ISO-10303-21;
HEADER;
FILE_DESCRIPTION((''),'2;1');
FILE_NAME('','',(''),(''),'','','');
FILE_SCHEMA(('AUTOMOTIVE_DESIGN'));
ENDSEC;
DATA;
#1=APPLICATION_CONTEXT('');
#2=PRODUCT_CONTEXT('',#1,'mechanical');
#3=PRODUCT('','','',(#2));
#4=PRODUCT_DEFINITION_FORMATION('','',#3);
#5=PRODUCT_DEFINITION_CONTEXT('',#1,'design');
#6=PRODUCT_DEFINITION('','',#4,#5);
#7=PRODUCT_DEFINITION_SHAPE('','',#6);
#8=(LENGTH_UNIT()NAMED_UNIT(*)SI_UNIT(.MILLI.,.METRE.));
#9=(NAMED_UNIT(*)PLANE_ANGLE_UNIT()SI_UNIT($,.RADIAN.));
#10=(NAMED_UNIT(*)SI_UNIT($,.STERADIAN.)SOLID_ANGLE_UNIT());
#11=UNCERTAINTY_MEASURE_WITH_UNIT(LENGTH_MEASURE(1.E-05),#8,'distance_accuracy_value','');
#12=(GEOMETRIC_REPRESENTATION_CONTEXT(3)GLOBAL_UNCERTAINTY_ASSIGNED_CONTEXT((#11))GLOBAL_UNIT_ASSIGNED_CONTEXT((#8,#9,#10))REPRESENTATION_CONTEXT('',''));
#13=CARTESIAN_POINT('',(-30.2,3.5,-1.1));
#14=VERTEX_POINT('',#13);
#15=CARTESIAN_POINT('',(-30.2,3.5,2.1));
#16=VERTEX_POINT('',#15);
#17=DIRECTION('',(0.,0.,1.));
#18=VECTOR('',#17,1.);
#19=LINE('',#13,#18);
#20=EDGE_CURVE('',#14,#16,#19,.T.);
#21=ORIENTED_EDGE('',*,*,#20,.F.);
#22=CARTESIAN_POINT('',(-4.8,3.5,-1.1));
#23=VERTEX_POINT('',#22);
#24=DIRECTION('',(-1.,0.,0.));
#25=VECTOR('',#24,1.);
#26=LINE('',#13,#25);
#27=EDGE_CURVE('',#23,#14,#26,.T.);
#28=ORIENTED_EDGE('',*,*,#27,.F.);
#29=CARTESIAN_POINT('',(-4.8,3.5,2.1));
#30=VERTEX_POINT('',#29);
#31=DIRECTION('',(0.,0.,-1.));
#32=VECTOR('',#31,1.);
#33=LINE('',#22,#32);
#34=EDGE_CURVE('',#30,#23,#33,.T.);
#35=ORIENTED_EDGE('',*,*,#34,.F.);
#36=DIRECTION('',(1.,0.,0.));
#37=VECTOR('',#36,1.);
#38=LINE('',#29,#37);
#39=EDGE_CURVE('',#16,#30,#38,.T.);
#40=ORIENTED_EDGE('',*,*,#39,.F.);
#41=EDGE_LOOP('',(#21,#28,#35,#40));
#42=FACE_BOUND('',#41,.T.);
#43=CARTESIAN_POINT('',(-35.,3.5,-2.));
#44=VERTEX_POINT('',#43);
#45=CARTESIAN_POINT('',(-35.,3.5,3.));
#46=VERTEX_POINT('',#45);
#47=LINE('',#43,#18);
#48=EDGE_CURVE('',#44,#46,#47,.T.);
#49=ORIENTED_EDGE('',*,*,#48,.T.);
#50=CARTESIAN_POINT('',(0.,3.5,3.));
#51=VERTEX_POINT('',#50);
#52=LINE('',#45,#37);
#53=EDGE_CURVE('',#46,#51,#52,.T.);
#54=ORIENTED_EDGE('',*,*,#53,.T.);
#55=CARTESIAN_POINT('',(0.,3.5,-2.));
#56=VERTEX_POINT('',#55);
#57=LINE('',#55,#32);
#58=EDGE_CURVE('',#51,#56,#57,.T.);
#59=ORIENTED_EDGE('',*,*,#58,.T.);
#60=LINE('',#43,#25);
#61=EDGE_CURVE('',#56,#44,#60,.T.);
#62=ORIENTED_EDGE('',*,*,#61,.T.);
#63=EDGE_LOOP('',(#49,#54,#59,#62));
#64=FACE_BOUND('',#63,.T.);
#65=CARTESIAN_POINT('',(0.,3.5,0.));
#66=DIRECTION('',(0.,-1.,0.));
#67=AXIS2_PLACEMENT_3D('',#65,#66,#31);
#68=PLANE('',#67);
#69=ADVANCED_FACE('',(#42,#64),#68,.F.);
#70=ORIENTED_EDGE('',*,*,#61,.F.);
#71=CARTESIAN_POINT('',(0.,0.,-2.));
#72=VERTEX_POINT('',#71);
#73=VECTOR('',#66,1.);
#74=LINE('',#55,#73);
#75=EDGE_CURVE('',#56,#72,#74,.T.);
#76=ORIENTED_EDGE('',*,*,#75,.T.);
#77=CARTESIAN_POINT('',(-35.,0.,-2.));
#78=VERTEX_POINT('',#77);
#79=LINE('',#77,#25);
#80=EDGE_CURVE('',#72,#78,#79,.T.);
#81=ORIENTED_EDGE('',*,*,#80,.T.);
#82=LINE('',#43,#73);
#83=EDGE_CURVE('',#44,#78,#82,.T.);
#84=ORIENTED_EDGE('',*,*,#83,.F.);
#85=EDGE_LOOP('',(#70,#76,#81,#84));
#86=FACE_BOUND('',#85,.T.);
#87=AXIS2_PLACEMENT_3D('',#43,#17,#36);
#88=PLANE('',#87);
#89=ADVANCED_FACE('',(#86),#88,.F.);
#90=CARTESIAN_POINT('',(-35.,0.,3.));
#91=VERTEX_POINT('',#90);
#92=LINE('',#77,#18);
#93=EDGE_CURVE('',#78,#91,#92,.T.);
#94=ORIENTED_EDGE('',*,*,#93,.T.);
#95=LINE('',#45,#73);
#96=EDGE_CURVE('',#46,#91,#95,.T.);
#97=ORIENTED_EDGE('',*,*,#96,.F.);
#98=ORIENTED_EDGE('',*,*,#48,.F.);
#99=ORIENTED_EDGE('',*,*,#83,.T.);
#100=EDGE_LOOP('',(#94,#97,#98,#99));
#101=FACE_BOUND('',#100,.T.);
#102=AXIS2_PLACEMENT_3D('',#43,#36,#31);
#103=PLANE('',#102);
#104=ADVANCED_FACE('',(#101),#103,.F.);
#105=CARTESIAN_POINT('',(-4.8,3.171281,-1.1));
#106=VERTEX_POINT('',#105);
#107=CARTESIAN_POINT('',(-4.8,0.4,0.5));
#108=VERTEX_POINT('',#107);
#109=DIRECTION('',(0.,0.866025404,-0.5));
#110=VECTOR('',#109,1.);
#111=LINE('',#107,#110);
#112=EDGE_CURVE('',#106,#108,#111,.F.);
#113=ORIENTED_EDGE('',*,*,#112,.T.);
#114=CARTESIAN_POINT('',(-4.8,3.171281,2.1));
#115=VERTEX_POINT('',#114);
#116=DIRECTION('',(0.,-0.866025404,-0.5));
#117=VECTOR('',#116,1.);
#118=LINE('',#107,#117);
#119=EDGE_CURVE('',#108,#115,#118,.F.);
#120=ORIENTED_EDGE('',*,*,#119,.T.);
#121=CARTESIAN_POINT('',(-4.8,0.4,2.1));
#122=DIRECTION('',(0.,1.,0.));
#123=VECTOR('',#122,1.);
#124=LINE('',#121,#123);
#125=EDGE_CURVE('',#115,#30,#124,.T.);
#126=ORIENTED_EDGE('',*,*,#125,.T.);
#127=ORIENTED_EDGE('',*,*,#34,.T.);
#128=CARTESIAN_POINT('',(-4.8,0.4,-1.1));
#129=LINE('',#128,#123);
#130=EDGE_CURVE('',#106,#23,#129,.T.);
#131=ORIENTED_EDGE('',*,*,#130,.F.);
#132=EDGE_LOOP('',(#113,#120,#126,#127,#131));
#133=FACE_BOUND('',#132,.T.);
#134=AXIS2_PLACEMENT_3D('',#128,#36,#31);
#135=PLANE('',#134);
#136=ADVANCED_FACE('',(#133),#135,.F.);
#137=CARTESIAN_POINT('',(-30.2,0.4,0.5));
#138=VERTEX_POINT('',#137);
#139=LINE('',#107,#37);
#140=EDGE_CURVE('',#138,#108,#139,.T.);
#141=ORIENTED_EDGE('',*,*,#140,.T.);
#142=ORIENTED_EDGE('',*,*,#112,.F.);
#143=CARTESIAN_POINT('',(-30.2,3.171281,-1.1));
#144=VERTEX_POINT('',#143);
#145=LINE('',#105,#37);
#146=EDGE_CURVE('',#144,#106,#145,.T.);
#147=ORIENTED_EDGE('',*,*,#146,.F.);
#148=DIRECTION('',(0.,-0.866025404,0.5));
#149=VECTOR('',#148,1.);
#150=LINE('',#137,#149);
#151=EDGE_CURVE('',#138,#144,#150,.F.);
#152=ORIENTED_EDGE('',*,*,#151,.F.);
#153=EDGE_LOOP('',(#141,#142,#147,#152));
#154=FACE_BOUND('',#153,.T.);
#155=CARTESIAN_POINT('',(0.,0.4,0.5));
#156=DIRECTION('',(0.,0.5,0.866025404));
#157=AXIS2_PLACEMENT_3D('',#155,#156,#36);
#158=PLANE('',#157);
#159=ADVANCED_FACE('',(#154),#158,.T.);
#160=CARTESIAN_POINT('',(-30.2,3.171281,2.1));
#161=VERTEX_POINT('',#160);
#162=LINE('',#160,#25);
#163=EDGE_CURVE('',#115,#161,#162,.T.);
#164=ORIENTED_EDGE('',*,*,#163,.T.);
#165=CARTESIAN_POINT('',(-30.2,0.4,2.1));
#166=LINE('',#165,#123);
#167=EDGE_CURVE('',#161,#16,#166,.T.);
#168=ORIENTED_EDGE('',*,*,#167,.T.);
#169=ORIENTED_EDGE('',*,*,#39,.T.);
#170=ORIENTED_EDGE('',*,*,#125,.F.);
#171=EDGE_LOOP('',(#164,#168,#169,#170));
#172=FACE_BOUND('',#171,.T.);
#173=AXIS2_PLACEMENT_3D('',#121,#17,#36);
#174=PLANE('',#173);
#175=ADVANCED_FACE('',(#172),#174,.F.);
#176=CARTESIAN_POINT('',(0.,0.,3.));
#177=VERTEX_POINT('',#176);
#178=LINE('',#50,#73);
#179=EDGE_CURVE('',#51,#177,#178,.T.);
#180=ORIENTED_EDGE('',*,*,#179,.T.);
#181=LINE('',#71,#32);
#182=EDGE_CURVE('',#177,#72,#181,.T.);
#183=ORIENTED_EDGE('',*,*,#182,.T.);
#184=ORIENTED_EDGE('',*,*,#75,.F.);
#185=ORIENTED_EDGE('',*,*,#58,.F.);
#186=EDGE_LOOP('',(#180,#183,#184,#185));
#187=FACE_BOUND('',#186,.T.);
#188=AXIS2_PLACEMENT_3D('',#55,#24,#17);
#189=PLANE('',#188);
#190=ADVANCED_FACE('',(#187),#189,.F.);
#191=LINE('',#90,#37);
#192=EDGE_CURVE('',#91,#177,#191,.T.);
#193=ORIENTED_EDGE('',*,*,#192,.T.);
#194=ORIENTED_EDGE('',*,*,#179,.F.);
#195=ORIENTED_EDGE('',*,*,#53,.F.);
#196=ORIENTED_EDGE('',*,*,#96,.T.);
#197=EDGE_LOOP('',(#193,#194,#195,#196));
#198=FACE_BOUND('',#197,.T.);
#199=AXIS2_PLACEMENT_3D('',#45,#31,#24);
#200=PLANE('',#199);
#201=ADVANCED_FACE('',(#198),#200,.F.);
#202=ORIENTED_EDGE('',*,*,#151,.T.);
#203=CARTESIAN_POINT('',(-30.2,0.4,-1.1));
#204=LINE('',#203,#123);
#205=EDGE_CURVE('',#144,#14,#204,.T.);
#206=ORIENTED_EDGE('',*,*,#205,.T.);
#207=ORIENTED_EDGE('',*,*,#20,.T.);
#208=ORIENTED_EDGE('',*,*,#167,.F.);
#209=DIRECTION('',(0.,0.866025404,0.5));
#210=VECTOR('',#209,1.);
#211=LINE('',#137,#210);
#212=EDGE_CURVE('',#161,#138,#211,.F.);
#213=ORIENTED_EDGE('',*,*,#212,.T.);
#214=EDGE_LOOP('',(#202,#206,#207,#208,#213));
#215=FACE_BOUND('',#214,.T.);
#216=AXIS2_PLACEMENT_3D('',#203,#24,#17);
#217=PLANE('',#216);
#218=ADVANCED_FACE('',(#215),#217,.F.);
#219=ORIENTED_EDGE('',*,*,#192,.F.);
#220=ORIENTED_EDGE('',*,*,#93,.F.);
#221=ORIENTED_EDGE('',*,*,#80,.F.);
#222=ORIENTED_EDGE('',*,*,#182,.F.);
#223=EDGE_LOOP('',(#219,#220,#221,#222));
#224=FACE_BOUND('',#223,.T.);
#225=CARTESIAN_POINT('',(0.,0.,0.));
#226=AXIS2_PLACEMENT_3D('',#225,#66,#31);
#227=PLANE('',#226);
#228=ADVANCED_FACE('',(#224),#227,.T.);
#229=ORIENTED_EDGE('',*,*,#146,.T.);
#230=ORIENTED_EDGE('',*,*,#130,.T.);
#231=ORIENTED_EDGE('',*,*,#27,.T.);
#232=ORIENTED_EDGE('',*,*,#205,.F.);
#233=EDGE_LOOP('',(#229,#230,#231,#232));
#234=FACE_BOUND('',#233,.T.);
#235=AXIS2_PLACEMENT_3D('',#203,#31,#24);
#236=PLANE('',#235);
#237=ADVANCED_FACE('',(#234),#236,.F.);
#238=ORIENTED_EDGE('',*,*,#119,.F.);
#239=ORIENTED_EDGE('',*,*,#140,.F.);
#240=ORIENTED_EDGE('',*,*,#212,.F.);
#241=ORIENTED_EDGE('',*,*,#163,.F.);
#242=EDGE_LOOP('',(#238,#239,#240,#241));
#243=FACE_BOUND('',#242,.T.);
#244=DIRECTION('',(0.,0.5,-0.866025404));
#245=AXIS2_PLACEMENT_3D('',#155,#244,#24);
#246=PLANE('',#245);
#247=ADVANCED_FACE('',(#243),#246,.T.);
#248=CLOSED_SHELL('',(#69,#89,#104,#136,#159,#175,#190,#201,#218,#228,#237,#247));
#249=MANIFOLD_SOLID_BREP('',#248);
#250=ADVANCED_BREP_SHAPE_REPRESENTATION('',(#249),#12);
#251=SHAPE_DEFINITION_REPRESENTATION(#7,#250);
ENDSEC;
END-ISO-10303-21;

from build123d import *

# Parameters (mm, degrees)
TOP_SKETCH_W                 = 35
TOP_SKETCH_H                 = 5
THICKNESS_EXTRUDE_DEPTH      = 3.5
HANDLE_SKETCH_W              = 25.4
HANDLE_SKETCH_H              = 3.2
HANDLE_SLOT_CUT_DEPTH        = 3.1
HANDLE_SLOT_CHAMFER_1_SIZE   = 1.6
HANDLE_SLOT_CHAMFER_1_SIZE2  = 2.771281292
HANDLE_SLOT_CHAMFER_2_SIZE   = 1.6
HANDLE_SLOT_CHAMFER_2_SIZE_2 = 2.771281292


with BuildPart() as part:
    # Top Sketch → Thickness Extrude (new body)
    with BuildSketch(Plane(origin=(0, 0, 0), x_dir=(1, 0, 0), z_dir=(0, 1, 0))):
        with Locations((-17.5, -0.5)):
            Rectangle(TOP_SKETCH_W, TOP_SKETCH_H)
    extrude(amount=THICKNESS_EXTRUDE_DEPTH)

    # Handle Sketch → Handle Slot Cut (cut)
    with BuildSketch(Plane(origin=(0, 3.5, 0), x_dir=(1, 0, 0), z_dir=(0, 1, 0))):
        with Locations((-17.5, -0.5)):
            Rectangle(HANDLE_SKETCH_W, HANDLE_SKETCH_H)
    extrude(amount=-HANDLE_SLOT_CUT_DEPTH, mode=Mode.SUBTRACT)

    # Handle Slot Chamfer 1
    handle_slot_chamfer_1_edges = [part.edges().sort_by_distance(p)[0] for p in [
        (-17.5, 0.4, 2.1),
    ]]
    handle_slot_chamfer_1_side = [part.faces().sort_by_distance(p)[0] for p in [
        (-17.5, 0.4, 0.5),
    ]]
    chamfer(handle_slot_chamfer_1_edges, length=HANDLE_SLOT_CHAMFER_1_SIZE, length2=HANDLE_SLOT_CHAMFER_1_SIZE2, reference=handle_slot_chamfer_1_side[0])

    # Handle Slot Chamfer 2
    # the kernel refuses this chamfer: 2.771281292, 1.6 mm, written as the material it adds along each edge
    with BuildSketch(Plane(origin=(-37.369542353, 0.4, -1.1), x_dir=(0, -0.057893862402671414, 0.9983227437537925), z_dir=(1, 0, 0))) as handle_slot_chamfer_2_piece_1_section:
        Polygon((HANDLE_SLOT_CHAMFER_2_SIZE * 0.998322743754, -HANDLE_SLOT_CHAMFER_2_SIZE * 0.0578938624027), (-HANDLE_SLOT_CHAMFER_2_SIZE_2 * 0.057893862405, -HANDLE_SLOT_CHAMFER_2_SIZE_2 * 0.998322743793), (0, 0), align=None)
    handle_slot_chamfer_2_piece_1 = extrude(amount=39.739084706, mode=Mode.PRIVATE)
    handle_slot_chamfer_2_piece_1 = split(handle_slot_chamfer_2_piece_1, bisect_by=Plane(origin=(-35, 1.323760431, -0.566666667), z_dir=(1, 0, 0)), keep=Keep.TOP, mode=Mode.PRIVATE)
    handle_slot_chamfer_2_piece_1 = split(handle_slot_chamfer_2_piece_1, bisect_by=Plane(origin=(0, 1.323760431, -0.566666667), z_dir=(-1, 0, 0)), keep=Keep.TOP, mode=Mode.PRIVATE)
    add(handle_slot_chamfer_2_piece_1)


solid = part.part
